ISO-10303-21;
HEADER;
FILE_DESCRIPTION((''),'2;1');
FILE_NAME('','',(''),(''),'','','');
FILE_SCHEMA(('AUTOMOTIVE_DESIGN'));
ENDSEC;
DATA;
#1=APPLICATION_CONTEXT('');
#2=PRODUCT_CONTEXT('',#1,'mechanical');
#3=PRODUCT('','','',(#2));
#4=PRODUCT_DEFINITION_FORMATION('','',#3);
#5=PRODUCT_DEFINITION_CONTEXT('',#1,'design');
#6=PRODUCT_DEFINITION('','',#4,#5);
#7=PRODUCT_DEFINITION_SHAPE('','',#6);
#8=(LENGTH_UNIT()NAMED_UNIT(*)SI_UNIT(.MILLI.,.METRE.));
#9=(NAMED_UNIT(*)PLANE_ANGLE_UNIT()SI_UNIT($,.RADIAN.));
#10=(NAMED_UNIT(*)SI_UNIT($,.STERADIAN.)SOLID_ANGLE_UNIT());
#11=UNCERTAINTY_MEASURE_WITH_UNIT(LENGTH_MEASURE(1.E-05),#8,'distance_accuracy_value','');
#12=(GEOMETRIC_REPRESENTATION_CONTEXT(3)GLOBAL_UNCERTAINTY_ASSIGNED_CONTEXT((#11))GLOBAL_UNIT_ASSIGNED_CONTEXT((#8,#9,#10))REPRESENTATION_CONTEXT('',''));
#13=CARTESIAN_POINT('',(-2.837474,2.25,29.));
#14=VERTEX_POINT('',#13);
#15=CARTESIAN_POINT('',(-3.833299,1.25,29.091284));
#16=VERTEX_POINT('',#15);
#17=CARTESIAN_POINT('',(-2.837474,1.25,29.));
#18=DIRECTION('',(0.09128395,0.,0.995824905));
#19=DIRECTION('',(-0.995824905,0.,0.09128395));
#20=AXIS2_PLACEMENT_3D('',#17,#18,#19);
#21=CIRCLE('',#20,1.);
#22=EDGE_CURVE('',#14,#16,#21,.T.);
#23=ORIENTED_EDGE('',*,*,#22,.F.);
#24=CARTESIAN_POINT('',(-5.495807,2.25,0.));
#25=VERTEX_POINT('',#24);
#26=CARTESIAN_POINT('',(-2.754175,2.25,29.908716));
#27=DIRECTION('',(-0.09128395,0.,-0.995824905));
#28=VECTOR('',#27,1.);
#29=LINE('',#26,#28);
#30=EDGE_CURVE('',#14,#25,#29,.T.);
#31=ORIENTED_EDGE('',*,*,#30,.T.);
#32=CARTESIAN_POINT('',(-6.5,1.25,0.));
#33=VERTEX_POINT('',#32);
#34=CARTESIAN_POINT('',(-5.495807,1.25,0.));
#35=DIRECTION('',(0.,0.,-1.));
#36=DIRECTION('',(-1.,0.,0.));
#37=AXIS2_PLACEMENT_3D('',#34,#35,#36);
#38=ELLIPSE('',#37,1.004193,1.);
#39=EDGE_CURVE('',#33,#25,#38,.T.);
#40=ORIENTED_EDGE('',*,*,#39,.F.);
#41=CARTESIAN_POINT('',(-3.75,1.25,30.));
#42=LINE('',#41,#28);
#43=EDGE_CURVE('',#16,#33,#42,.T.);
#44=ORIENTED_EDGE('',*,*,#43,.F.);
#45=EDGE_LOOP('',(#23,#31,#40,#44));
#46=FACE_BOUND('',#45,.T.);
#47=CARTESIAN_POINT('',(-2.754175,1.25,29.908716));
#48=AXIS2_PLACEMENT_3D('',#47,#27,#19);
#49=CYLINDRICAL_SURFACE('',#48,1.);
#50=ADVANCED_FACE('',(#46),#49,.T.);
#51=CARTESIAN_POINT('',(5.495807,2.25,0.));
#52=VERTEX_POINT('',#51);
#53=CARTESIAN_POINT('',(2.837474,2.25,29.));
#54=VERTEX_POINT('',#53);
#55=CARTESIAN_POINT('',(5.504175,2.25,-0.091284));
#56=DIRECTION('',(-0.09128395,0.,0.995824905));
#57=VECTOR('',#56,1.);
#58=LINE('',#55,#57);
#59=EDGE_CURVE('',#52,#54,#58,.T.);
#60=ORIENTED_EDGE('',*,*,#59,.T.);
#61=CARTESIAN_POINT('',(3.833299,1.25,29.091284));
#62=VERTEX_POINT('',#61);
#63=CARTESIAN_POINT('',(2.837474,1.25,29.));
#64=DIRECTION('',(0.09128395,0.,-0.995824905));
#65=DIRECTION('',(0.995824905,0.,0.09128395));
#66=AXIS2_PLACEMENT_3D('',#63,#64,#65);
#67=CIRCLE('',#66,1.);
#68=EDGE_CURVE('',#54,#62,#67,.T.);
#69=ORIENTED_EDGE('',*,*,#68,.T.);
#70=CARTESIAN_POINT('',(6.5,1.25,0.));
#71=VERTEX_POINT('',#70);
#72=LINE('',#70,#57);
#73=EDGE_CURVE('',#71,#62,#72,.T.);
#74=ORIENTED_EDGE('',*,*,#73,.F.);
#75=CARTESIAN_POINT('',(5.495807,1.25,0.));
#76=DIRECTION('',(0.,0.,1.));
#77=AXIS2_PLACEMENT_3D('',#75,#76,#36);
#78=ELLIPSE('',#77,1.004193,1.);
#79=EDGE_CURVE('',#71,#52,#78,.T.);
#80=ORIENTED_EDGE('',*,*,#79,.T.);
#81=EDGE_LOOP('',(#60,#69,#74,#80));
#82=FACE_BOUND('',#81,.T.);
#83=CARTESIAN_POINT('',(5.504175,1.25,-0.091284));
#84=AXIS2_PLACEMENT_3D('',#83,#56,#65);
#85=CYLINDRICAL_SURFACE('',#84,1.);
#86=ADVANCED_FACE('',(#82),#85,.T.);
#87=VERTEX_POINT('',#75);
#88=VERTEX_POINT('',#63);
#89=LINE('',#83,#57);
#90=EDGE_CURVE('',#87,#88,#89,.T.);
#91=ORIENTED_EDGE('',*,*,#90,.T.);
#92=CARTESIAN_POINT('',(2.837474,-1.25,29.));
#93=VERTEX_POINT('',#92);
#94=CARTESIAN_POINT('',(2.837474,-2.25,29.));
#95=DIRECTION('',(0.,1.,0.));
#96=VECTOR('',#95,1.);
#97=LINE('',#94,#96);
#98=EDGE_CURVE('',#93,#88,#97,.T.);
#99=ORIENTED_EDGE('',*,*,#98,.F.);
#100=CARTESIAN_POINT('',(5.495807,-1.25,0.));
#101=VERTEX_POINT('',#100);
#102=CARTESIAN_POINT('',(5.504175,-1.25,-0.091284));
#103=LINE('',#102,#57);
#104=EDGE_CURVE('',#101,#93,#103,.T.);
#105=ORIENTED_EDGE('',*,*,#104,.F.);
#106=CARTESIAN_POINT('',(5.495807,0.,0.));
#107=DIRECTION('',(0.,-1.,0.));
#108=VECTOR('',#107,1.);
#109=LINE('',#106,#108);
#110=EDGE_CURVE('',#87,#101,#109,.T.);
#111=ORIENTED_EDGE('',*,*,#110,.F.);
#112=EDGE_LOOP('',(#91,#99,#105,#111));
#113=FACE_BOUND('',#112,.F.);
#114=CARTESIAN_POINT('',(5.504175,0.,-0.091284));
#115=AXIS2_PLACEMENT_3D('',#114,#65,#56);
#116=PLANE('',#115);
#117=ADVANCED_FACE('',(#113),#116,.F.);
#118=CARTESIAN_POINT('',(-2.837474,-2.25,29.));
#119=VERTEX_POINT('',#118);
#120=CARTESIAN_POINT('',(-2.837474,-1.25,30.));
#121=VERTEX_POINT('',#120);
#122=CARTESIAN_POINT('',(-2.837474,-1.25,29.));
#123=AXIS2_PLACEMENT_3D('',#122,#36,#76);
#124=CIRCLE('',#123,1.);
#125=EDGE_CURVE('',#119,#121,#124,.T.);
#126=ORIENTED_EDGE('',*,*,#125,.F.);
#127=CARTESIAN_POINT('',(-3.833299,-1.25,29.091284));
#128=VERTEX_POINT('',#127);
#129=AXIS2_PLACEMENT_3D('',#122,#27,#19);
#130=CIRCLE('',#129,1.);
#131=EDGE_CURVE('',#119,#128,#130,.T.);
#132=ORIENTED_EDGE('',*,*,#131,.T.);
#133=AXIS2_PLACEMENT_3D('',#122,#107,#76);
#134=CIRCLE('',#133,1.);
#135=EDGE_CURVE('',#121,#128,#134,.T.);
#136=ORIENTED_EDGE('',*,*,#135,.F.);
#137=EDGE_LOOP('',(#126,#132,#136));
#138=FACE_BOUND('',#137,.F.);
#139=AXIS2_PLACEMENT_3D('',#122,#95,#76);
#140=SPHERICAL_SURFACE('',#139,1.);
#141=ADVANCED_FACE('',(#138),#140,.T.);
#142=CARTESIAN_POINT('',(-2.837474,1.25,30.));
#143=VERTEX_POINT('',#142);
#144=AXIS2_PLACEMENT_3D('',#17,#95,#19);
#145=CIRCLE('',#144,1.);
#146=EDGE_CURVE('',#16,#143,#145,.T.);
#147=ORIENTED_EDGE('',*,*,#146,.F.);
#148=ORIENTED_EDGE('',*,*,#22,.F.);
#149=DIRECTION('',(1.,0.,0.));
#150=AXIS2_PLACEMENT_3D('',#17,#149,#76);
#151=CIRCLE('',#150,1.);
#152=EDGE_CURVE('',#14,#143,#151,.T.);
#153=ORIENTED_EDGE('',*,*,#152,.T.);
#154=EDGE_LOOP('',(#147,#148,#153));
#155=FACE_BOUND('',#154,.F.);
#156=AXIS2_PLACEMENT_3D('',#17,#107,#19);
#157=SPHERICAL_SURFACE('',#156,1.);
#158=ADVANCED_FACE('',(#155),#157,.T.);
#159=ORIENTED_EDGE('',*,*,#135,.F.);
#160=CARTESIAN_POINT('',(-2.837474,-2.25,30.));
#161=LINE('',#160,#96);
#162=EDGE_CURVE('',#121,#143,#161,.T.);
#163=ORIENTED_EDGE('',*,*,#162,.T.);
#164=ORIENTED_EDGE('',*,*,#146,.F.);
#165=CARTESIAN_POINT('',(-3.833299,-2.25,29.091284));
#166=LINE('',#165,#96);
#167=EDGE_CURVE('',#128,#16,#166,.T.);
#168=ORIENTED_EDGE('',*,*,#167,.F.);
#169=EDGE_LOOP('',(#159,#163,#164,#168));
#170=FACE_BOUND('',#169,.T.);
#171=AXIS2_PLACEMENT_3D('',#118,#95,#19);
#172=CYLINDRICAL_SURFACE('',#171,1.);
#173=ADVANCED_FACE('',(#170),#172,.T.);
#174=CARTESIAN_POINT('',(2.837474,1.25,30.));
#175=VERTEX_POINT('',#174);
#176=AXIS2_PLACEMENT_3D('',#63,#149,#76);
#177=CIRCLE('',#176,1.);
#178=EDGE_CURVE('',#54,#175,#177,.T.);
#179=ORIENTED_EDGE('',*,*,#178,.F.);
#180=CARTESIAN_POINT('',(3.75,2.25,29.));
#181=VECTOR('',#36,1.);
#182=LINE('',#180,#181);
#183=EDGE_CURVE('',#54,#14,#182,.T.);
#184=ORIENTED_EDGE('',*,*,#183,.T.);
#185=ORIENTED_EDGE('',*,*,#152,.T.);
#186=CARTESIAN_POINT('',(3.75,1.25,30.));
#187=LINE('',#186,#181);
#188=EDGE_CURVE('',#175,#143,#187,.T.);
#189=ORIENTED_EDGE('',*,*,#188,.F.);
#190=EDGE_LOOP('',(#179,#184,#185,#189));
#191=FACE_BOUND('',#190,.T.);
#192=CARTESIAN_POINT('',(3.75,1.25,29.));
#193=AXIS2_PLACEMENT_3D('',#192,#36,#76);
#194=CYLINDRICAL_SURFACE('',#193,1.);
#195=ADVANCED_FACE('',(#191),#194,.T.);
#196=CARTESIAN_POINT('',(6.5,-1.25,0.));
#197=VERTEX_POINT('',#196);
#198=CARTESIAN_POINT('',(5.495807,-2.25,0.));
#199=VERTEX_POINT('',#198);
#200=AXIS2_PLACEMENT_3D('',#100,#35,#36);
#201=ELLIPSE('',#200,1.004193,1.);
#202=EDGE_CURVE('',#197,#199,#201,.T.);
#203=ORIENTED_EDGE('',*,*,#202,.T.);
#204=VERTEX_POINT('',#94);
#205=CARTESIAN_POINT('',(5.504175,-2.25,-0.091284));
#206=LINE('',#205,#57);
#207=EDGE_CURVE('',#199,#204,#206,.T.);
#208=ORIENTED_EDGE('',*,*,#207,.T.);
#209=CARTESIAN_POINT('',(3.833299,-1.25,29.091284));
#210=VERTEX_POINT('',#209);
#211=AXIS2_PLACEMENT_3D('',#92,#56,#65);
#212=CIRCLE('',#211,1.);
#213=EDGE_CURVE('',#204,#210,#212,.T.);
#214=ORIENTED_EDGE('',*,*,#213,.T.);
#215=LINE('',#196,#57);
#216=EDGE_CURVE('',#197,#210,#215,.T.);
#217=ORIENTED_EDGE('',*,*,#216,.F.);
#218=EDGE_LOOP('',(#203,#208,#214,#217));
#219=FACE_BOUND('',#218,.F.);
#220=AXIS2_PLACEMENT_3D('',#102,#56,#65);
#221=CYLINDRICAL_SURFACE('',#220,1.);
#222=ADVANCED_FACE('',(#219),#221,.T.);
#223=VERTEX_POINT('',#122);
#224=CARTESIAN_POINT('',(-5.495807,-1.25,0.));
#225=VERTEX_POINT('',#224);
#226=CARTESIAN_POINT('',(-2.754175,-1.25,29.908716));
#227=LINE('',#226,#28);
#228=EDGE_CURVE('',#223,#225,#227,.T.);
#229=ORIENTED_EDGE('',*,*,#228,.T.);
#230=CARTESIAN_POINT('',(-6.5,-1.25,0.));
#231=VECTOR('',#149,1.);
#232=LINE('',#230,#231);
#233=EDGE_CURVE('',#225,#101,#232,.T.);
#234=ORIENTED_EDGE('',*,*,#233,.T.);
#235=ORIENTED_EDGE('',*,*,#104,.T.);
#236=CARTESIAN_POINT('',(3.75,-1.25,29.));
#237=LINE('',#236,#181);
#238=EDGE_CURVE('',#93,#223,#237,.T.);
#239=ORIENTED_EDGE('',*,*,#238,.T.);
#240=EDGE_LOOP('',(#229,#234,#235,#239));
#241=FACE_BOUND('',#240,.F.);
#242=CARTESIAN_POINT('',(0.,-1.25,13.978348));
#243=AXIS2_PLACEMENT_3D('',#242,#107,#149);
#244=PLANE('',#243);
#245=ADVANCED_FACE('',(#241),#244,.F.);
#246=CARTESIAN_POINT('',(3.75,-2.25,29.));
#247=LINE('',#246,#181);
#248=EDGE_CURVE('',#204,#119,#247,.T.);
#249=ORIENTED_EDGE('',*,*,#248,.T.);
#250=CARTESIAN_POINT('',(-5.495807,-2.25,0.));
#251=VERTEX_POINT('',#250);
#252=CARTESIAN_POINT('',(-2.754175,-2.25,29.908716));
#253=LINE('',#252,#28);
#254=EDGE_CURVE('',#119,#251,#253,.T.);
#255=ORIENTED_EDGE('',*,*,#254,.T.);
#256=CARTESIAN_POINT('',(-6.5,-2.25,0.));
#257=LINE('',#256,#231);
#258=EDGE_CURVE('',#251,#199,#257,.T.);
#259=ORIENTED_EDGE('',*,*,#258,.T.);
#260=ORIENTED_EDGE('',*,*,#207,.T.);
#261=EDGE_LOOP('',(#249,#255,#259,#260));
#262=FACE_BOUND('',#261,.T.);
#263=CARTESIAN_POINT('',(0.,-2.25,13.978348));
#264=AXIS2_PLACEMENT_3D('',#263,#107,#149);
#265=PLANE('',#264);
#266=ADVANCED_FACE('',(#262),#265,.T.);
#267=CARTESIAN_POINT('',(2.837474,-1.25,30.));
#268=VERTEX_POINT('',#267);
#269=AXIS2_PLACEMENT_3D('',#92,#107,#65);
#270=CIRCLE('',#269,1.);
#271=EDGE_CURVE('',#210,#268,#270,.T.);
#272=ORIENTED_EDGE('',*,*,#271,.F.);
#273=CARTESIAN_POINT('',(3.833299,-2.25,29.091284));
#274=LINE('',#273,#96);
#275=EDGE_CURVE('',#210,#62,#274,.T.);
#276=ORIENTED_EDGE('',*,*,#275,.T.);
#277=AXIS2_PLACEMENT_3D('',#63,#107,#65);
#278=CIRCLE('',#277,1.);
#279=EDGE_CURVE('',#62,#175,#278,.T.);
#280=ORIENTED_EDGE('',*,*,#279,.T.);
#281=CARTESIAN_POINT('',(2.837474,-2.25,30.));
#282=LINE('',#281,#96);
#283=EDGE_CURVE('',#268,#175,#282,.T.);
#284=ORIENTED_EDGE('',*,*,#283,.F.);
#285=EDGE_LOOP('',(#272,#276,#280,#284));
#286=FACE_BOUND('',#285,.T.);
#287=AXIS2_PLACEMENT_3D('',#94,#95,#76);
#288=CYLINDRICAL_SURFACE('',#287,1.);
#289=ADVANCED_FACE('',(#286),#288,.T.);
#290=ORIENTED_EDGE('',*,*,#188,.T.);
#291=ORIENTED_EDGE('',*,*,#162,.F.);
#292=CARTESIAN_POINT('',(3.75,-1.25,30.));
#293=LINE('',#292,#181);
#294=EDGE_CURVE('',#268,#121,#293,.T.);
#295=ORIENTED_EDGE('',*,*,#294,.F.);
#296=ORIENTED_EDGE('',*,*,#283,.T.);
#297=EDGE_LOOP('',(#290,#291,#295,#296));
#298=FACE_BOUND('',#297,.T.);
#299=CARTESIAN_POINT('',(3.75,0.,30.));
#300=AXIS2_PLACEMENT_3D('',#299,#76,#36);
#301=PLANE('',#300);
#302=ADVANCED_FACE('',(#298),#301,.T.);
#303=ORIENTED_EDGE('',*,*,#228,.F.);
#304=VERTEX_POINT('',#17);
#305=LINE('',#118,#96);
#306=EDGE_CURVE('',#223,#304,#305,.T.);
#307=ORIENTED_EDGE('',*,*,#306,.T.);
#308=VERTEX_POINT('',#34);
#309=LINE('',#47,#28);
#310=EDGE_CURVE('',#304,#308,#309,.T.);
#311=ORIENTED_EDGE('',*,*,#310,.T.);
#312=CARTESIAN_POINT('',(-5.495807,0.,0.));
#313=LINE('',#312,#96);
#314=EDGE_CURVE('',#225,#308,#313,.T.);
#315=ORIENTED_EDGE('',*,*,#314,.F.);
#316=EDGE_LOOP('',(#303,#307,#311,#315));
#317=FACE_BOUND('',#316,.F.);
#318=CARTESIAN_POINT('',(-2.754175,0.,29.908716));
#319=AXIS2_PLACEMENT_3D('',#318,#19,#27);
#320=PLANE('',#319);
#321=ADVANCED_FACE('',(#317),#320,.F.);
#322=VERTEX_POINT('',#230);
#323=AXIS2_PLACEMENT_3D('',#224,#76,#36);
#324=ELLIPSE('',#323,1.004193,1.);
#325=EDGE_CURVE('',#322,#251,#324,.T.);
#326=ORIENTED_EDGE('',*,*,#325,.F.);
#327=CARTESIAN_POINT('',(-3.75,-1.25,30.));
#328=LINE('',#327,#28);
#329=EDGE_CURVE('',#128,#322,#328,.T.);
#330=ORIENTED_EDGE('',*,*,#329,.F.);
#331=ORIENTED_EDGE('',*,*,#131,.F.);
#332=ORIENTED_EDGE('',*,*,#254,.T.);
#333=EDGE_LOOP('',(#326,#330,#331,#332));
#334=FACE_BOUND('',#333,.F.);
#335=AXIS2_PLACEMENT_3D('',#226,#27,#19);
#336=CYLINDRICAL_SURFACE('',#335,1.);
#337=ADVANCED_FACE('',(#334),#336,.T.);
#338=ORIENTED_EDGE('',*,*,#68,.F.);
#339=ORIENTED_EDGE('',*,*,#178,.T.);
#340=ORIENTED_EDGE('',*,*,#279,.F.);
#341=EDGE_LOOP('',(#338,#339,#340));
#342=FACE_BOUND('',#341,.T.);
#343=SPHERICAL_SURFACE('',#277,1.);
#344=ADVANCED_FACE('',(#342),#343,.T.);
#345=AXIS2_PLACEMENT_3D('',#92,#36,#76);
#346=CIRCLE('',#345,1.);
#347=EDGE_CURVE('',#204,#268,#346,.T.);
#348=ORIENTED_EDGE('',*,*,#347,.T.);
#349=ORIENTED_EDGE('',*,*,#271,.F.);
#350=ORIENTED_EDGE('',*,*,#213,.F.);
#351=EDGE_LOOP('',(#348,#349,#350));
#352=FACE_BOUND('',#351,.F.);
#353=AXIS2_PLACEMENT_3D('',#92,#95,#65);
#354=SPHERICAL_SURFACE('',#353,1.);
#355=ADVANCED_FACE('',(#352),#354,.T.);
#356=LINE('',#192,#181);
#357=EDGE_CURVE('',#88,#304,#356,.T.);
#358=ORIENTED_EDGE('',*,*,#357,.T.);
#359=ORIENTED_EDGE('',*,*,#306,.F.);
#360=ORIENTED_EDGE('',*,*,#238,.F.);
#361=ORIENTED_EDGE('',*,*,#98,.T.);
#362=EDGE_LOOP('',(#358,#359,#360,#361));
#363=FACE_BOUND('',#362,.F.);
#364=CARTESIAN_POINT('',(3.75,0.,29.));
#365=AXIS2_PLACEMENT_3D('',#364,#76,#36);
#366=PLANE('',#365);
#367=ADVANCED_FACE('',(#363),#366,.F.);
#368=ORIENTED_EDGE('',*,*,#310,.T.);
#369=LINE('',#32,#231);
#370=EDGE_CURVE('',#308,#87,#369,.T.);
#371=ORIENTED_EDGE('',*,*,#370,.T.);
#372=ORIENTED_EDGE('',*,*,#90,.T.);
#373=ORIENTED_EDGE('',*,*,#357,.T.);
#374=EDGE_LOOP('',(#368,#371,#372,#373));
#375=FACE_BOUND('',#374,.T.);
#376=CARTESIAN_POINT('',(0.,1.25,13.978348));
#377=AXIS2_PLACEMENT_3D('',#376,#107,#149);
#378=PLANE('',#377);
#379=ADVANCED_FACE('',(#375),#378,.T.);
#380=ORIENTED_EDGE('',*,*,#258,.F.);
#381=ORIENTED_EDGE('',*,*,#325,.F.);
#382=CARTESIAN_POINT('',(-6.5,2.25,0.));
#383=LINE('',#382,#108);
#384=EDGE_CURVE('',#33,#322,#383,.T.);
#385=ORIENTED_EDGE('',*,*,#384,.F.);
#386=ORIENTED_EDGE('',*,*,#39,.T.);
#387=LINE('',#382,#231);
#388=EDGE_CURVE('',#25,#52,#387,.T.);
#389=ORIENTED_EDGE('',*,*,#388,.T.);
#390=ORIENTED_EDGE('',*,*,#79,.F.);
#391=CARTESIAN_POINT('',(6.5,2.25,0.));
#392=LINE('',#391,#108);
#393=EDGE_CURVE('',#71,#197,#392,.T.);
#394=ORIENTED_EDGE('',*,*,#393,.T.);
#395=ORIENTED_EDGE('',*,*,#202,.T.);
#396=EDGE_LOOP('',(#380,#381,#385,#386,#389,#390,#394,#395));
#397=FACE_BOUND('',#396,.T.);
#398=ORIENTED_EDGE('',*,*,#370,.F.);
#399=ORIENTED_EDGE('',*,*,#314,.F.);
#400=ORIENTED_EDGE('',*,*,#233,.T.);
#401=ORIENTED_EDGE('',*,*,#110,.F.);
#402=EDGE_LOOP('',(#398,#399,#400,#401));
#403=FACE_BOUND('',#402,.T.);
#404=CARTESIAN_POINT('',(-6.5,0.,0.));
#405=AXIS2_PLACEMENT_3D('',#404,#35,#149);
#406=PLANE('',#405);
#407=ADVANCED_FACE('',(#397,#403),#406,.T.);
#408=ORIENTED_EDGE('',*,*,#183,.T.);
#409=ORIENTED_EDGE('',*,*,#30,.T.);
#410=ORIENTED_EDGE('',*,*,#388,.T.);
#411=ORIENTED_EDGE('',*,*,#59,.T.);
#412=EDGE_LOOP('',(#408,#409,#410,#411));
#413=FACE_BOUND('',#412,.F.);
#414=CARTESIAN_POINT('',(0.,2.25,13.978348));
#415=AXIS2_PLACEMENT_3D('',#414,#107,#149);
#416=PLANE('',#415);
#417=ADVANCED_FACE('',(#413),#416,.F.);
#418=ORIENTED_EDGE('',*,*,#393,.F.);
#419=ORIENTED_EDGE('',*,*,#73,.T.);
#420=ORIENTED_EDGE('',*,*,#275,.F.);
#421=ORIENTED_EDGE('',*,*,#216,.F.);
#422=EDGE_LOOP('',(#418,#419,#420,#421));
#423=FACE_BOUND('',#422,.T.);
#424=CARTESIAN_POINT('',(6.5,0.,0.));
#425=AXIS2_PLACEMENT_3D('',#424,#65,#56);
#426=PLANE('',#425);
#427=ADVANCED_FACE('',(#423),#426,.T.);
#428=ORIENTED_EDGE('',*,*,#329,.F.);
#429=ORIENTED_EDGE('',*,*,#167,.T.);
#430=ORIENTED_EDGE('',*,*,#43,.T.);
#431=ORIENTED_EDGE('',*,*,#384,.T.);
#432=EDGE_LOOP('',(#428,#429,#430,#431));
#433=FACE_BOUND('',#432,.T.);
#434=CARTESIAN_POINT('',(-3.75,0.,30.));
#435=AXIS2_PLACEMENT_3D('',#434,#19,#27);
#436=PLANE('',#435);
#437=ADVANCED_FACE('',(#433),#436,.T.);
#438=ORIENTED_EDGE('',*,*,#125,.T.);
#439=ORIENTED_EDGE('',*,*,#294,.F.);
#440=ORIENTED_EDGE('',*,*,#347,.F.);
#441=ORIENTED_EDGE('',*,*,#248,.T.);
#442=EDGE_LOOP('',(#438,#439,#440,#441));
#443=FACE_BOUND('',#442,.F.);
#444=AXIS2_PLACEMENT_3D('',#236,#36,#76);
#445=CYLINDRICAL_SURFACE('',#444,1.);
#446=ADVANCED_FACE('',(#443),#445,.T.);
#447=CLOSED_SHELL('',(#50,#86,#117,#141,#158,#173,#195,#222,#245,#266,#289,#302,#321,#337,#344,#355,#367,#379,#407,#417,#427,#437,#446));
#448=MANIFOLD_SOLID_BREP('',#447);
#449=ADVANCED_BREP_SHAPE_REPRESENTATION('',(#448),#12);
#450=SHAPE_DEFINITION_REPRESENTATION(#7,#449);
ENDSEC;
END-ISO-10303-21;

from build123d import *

# Parameters (mm, degrees)
F1_DEPTH = 2.25
F2_R     = 1
F3_T     = 1


# Not quite as in the source:
# - a shell that OpenCascade refuses in one call is made with other operations: the cavity is built on its own and cut out


with BuildPart() as f1:
    # F0 (on Front) → F1 (new body, symmetric)
    with BuildSketch(Plane.XZ):
        Polygon((-3.75, 30), (-6.5, 0), (6.5, 0), (3.75, 30), align=None)
    extrude(amount=F1_DEPTH, both=True)

    # F2
    f2_edges = [f1.edges().sort_by_distance(p)[0] for p in [
        (-3.75, 0, 30),
        (3.75, 0, 30),
        (5.125, -2.25, 15),
        (0, -2.25, 30),
        (-5.125, -2.25, 15),
        (-5.125, 2.25, 15),
        (5.125, 2.25, 15),
        (0, 2.25, 30),
    ]]
    fillet(f2_edges, radius=F2_R)

    # F3: shell of thickness 1, made by hand


with BuildPart() as f3_core1:
    # F3_t2: copy of F1
    add(f1.part)

    # the walls: a layer under each face that stays
    f3_faces = [f3_core1.faces().sort_by_distance(p)[0] for p in [
        (-5.1666494856, 0, 14.5456419748),
        (0, 2.25, 14.5),
        (0, -2.25, 14.5),
        (5.1666494856, 0, 14.5456419748),
        (0, 0, 30),
    ]]
    thicken(f3_faces, amount=-F3_T, mode=Mode.SUBTRACT)


with BuildPart() as f1_1:
    add(f1.part)

    # what is left inside the walls is the cavity
    f3_cavity = [f3_core1.part.solids().sort_by_distance(p)[0] for p in [
        (0, -1.24, 9.666667),
    ]]
    add(f3_cavity, mode=Mode.SUBTRACT)


solid = f1_1.part
